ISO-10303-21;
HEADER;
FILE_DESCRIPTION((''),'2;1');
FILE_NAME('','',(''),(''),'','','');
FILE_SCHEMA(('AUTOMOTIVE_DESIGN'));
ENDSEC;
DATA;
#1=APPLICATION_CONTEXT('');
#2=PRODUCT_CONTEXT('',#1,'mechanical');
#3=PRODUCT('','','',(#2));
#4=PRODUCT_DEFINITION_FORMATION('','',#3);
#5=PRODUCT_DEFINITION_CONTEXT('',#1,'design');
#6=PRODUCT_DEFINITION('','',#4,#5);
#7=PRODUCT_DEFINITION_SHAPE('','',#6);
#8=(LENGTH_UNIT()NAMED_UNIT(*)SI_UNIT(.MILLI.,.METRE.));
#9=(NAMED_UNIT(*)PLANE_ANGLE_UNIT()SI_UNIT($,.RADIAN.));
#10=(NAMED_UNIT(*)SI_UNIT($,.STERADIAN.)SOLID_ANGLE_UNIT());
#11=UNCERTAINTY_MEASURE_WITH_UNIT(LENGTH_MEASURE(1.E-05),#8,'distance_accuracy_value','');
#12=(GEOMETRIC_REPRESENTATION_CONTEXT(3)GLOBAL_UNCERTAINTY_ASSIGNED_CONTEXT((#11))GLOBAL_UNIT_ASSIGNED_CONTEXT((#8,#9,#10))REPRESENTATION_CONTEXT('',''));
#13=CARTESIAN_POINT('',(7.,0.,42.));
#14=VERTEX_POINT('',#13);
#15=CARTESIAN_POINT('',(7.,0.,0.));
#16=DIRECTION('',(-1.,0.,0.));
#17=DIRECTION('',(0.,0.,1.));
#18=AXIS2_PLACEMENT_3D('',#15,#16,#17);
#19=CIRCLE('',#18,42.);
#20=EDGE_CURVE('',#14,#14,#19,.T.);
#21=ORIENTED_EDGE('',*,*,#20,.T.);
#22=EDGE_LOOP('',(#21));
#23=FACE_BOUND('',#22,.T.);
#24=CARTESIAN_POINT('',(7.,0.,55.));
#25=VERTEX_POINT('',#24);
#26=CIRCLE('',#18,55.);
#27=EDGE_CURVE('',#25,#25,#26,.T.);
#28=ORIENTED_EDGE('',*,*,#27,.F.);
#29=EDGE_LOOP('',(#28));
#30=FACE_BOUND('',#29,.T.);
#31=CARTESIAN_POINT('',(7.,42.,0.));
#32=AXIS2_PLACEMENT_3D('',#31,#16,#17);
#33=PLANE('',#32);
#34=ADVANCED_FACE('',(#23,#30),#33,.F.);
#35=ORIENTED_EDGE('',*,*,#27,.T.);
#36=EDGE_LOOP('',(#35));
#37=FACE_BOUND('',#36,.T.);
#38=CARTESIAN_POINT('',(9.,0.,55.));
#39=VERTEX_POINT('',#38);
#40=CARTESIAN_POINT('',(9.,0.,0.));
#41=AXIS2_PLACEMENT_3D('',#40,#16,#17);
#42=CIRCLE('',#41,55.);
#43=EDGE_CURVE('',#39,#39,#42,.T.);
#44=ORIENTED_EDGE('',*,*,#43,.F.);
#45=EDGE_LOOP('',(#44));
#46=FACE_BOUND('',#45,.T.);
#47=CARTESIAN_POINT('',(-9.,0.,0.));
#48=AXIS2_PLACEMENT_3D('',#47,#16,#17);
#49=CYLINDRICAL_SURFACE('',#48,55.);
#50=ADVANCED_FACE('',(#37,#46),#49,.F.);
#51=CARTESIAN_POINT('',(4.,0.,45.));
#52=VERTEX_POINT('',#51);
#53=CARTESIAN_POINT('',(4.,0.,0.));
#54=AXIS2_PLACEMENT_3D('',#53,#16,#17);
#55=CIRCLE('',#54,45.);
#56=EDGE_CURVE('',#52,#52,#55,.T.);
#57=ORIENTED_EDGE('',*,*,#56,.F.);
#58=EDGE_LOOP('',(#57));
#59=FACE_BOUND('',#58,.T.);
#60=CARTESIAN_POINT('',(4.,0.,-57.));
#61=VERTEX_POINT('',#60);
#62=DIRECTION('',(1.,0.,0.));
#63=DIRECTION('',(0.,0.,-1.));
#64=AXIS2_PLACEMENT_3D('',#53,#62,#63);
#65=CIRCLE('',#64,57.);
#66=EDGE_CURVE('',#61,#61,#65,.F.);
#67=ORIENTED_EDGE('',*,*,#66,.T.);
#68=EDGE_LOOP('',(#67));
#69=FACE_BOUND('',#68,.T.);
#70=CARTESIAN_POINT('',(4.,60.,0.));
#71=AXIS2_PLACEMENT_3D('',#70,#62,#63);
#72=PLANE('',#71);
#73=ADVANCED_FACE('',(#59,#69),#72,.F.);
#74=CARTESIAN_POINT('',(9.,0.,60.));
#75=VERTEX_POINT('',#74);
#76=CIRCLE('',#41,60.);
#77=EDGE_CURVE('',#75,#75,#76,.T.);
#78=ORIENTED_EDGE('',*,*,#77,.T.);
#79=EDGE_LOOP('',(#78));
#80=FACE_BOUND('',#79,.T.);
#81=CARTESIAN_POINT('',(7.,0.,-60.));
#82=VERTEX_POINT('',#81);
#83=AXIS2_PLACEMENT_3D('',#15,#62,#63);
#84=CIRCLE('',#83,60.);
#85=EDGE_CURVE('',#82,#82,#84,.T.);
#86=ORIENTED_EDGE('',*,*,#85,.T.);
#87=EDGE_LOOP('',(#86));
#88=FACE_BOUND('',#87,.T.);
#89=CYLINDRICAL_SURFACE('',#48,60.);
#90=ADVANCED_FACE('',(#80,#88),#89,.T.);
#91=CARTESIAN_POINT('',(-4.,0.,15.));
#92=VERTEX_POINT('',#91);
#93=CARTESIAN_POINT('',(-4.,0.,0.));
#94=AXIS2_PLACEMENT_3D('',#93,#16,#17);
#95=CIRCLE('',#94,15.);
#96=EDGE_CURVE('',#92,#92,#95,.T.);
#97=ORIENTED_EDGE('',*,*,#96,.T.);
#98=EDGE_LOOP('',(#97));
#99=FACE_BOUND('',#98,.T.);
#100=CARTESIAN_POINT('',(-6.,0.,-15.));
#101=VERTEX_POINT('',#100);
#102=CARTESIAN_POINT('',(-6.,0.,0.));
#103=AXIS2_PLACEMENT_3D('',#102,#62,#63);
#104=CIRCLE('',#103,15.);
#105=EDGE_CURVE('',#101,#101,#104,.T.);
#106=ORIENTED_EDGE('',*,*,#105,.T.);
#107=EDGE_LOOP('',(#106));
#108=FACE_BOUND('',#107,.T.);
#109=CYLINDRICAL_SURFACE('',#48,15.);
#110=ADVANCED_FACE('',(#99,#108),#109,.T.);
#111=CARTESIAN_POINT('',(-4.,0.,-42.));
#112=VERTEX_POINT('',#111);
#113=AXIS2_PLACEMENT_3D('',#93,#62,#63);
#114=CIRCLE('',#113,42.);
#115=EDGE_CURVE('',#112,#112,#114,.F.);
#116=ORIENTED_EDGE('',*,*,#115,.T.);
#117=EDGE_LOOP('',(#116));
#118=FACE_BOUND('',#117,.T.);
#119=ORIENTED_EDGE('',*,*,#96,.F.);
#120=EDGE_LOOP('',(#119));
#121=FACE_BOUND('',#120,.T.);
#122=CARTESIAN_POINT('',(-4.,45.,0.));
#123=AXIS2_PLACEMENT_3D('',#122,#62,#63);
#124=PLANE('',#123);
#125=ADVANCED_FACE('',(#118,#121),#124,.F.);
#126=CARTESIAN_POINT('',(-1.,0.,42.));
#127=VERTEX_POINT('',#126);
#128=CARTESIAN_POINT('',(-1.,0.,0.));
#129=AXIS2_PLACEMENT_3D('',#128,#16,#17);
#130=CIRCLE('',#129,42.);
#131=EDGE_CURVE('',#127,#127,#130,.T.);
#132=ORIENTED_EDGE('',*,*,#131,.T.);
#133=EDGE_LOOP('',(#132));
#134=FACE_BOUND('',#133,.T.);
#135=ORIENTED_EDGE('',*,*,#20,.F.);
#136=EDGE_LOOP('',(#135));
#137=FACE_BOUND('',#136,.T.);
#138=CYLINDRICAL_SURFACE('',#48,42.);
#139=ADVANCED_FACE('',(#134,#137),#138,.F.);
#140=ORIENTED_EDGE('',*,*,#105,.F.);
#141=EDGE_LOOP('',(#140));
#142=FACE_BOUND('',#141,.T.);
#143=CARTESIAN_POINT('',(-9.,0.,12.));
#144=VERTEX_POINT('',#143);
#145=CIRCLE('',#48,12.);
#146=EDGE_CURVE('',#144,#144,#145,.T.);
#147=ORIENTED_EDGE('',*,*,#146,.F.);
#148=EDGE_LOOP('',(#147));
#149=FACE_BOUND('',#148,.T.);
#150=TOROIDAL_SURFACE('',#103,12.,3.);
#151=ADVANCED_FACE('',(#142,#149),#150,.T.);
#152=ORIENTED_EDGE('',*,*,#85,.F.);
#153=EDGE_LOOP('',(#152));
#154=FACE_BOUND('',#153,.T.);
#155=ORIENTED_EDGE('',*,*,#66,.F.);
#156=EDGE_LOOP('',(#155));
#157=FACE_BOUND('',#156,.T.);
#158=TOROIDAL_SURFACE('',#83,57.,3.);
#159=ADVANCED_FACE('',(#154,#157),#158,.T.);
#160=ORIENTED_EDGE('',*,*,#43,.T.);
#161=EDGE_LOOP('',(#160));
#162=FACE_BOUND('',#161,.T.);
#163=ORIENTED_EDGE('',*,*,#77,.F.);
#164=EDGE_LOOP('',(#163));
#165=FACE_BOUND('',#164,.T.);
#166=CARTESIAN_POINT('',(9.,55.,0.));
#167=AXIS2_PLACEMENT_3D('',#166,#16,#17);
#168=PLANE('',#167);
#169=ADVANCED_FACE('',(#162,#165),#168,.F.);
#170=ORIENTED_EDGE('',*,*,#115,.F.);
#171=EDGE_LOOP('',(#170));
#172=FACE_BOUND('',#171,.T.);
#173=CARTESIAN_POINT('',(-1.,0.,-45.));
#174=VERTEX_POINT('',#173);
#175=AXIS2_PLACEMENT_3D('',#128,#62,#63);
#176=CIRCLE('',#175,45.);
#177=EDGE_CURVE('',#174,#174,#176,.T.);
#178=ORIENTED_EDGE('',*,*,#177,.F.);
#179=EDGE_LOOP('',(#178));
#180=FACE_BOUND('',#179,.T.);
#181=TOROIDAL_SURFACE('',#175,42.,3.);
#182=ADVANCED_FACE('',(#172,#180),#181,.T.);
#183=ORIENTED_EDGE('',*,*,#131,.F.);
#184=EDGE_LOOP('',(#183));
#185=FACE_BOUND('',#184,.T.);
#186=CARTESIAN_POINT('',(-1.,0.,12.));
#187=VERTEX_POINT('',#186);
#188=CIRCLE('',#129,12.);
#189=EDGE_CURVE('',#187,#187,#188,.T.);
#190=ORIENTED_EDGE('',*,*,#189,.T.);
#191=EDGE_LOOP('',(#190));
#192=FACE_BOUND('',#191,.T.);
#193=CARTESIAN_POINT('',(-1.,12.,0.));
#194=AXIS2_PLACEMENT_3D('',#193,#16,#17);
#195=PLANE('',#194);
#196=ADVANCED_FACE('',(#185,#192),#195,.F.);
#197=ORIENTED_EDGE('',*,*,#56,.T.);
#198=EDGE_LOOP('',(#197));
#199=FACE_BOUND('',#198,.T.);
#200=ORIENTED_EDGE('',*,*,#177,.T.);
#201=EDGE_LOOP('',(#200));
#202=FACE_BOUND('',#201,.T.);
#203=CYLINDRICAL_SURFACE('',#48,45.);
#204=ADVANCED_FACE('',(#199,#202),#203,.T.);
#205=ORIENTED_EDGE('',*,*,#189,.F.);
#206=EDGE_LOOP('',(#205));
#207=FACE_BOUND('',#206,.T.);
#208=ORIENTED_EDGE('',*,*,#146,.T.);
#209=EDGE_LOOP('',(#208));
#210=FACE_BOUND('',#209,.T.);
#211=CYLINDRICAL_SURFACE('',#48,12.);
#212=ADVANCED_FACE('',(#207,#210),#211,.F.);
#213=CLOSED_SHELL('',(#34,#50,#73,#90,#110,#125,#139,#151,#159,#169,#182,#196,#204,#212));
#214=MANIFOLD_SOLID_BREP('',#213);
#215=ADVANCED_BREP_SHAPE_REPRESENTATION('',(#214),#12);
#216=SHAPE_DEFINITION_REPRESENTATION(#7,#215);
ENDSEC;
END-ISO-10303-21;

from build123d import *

# Parameters (mm, degrees)
FILLET2_R = 3


with BuildPart() as part:
    # Sketch1 → Revolve1 (revolve)
    with BuildSketch(Plane.XY, mode=Mode.PRIVATE) as revolve1_sk:
        Polygon((9, 60), (4, 60), (4, 45), (-4, 45), (-4, 15), (-9, 15), (-9, 12), (-1, 12), (-1, 42), (7, 42), (7, 55), (9, 55), align=None)
    revolve(revolve1_sk.sketch.rotate(Axis((-9, 0, 0), (1, 0, 0)), 90), axis=Axis((-9, 0, 0), (1, 0, 0)))

    # Fillet2
    fillet2_edges = [part.edges().sort_by_distance(p)[0] for p in [
        (-9, 0, -15),
        (-4, 0, -45),
        (4, 0, -60),
    ]]
    fillet(fillet2_edges, radius=FILLET2_R - 0.0001)  # a hair under: the kernel refuses the full size


solid = part.part
